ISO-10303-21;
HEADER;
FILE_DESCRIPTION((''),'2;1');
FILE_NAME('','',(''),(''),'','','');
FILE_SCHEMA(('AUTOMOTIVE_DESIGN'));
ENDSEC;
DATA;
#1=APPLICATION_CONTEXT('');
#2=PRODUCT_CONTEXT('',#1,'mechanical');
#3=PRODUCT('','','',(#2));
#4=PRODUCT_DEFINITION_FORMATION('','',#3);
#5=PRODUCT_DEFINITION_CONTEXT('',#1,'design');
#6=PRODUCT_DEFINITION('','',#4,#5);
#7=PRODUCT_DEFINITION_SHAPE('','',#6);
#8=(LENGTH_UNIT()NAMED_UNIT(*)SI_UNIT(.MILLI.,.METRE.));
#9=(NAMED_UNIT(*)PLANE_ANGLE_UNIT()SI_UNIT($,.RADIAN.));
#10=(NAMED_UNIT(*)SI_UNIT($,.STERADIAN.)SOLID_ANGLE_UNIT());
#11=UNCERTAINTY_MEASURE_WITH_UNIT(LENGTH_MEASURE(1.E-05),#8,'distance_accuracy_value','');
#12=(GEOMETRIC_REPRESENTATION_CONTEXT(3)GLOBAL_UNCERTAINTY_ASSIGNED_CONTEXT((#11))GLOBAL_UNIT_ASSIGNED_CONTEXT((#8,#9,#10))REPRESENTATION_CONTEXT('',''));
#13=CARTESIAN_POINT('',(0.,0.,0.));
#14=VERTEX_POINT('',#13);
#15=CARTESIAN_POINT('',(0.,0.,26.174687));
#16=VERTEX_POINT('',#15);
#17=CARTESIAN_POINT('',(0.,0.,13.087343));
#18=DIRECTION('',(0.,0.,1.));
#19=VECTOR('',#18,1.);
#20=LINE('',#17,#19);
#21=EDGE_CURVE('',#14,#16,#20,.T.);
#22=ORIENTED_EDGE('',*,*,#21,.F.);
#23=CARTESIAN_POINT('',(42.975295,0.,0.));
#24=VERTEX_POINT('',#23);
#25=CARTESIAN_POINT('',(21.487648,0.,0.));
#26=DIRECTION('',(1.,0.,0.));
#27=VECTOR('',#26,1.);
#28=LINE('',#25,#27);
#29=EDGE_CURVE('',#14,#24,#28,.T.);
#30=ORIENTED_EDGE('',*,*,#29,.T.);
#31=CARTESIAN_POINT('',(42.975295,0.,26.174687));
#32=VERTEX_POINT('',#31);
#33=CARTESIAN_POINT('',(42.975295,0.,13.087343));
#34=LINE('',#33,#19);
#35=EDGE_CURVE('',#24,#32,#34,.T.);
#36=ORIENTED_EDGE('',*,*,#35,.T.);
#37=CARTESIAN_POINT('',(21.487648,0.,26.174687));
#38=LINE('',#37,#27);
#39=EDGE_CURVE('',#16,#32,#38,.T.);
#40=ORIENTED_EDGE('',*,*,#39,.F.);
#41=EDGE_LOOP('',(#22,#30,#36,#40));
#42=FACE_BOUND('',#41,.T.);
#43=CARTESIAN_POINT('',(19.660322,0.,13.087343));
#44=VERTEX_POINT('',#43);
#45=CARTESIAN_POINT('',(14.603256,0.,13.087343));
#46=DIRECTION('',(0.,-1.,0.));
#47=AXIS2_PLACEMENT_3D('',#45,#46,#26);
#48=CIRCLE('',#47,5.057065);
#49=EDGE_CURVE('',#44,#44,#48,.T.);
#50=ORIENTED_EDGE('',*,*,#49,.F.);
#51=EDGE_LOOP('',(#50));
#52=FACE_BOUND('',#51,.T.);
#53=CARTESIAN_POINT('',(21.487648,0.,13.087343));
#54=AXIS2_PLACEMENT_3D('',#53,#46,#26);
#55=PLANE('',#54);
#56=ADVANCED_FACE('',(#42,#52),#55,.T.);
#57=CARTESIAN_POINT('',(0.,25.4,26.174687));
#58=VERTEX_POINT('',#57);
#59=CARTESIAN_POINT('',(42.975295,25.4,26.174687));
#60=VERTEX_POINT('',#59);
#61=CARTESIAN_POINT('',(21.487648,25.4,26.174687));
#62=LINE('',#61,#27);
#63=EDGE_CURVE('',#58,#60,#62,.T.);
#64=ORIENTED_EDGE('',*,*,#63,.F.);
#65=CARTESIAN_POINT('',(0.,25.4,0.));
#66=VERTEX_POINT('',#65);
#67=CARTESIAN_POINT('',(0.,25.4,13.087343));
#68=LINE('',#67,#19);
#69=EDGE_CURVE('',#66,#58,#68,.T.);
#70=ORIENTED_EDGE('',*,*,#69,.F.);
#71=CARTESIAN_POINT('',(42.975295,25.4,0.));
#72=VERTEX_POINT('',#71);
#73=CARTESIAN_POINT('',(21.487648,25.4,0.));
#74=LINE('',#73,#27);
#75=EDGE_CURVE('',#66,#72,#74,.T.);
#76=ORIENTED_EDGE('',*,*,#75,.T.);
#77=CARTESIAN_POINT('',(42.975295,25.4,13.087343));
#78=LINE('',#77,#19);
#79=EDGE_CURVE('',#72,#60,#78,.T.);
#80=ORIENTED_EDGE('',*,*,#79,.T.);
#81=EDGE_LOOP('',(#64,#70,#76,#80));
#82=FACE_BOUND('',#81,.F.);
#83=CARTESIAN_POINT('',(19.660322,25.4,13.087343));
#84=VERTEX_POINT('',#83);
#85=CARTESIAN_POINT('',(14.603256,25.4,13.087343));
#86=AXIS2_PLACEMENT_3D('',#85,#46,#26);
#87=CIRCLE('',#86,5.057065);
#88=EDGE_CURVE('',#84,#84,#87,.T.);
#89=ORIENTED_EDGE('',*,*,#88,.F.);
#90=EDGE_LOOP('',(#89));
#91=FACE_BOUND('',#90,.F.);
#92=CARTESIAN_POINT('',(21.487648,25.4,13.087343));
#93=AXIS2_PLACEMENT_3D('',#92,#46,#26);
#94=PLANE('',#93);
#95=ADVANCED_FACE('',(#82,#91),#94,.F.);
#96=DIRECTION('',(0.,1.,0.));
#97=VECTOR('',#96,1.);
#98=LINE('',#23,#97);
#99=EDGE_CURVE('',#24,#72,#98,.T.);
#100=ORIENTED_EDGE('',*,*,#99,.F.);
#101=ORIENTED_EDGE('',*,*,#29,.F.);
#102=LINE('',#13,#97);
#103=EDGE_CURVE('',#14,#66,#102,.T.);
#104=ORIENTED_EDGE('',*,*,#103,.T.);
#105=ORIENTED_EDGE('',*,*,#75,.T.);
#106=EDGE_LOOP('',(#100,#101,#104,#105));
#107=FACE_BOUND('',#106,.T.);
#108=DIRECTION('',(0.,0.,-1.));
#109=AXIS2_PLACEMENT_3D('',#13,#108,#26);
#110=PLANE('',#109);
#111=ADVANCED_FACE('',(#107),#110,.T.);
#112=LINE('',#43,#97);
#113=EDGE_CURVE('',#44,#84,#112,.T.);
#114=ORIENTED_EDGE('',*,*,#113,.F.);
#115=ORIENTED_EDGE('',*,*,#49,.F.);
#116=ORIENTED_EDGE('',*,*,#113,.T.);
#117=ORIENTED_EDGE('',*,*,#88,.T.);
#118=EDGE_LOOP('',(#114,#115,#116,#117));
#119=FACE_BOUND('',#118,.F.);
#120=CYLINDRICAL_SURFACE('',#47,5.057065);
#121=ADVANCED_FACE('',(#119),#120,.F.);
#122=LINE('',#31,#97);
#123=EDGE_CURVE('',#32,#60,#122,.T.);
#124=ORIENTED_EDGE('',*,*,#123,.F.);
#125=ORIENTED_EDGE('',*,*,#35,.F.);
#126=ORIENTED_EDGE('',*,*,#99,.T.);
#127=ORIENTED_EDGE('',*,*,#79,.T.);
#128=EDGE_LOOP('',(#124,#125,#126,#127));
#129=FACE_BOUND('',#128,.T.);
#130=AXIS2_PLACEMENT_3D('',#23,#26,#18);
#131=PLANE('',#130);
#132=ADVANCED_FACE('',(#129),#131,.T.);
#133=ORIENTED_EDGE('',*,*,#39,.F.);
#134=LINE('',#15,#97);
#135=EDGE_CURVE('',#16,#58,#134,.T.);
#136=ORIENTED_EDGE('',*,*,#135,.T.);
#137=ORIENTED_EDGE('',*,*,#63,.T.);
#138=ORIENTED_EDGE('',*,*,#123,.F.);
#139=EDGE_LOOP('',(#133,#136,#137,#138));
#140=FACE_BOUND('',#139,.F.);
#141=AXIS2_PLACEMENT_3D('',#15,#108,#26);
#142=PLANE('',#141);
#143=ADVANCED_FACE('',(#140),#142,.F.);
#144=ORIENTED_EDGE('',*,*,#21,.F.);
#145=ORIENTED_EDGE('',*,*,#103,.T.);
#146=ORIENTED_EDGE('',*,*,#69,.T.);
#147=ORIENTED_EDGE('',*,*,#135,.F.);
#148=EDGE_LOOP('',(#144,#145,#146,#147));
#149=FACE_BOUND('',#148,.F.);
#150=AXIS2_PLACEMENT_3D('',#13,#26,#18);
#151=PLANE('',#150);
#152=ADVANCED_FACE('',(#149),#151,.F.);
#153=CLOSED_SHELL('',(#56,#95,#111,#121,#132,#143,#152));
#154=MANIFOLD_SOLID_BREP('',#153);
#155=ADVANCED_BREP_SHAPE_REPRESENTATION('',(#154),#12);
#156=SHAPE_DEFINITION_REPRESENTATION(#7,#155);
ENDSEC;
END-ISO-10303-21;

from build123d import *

# Parameters (mm, degrees)
F0_W     = 42.9752953351
F0_H     = 26.1746868491
F1_DEPTH = 25.4
F2_R     = 5.0570652765
F3_DEPTH = 25.401


# Not quite as in the source:
# - the program builds the solid bodies; features that only make, move or delete a surface that nothing else refers to are left out


with BuildPart() as f1:
    # F0 (on Front) → F1 (new body)
    with BuildSketch(Plane.XZ):
        with Locations((21.4876476675, 13.0873434246)):
            Rectangle(F0_W, F0_H)
    extrude(amount=-F1_DEPTH)

    # F2 (on face) → F3 (cut, through all)
    with BuildSketch(Plane.XZ):
        with Locations((14.6032562479, 13.0873434246)):
            Circle(F2_R)
    extrude(amount=-F3_DEPTH, mode=Mode.SUBTRACT)


solid = f1.part
